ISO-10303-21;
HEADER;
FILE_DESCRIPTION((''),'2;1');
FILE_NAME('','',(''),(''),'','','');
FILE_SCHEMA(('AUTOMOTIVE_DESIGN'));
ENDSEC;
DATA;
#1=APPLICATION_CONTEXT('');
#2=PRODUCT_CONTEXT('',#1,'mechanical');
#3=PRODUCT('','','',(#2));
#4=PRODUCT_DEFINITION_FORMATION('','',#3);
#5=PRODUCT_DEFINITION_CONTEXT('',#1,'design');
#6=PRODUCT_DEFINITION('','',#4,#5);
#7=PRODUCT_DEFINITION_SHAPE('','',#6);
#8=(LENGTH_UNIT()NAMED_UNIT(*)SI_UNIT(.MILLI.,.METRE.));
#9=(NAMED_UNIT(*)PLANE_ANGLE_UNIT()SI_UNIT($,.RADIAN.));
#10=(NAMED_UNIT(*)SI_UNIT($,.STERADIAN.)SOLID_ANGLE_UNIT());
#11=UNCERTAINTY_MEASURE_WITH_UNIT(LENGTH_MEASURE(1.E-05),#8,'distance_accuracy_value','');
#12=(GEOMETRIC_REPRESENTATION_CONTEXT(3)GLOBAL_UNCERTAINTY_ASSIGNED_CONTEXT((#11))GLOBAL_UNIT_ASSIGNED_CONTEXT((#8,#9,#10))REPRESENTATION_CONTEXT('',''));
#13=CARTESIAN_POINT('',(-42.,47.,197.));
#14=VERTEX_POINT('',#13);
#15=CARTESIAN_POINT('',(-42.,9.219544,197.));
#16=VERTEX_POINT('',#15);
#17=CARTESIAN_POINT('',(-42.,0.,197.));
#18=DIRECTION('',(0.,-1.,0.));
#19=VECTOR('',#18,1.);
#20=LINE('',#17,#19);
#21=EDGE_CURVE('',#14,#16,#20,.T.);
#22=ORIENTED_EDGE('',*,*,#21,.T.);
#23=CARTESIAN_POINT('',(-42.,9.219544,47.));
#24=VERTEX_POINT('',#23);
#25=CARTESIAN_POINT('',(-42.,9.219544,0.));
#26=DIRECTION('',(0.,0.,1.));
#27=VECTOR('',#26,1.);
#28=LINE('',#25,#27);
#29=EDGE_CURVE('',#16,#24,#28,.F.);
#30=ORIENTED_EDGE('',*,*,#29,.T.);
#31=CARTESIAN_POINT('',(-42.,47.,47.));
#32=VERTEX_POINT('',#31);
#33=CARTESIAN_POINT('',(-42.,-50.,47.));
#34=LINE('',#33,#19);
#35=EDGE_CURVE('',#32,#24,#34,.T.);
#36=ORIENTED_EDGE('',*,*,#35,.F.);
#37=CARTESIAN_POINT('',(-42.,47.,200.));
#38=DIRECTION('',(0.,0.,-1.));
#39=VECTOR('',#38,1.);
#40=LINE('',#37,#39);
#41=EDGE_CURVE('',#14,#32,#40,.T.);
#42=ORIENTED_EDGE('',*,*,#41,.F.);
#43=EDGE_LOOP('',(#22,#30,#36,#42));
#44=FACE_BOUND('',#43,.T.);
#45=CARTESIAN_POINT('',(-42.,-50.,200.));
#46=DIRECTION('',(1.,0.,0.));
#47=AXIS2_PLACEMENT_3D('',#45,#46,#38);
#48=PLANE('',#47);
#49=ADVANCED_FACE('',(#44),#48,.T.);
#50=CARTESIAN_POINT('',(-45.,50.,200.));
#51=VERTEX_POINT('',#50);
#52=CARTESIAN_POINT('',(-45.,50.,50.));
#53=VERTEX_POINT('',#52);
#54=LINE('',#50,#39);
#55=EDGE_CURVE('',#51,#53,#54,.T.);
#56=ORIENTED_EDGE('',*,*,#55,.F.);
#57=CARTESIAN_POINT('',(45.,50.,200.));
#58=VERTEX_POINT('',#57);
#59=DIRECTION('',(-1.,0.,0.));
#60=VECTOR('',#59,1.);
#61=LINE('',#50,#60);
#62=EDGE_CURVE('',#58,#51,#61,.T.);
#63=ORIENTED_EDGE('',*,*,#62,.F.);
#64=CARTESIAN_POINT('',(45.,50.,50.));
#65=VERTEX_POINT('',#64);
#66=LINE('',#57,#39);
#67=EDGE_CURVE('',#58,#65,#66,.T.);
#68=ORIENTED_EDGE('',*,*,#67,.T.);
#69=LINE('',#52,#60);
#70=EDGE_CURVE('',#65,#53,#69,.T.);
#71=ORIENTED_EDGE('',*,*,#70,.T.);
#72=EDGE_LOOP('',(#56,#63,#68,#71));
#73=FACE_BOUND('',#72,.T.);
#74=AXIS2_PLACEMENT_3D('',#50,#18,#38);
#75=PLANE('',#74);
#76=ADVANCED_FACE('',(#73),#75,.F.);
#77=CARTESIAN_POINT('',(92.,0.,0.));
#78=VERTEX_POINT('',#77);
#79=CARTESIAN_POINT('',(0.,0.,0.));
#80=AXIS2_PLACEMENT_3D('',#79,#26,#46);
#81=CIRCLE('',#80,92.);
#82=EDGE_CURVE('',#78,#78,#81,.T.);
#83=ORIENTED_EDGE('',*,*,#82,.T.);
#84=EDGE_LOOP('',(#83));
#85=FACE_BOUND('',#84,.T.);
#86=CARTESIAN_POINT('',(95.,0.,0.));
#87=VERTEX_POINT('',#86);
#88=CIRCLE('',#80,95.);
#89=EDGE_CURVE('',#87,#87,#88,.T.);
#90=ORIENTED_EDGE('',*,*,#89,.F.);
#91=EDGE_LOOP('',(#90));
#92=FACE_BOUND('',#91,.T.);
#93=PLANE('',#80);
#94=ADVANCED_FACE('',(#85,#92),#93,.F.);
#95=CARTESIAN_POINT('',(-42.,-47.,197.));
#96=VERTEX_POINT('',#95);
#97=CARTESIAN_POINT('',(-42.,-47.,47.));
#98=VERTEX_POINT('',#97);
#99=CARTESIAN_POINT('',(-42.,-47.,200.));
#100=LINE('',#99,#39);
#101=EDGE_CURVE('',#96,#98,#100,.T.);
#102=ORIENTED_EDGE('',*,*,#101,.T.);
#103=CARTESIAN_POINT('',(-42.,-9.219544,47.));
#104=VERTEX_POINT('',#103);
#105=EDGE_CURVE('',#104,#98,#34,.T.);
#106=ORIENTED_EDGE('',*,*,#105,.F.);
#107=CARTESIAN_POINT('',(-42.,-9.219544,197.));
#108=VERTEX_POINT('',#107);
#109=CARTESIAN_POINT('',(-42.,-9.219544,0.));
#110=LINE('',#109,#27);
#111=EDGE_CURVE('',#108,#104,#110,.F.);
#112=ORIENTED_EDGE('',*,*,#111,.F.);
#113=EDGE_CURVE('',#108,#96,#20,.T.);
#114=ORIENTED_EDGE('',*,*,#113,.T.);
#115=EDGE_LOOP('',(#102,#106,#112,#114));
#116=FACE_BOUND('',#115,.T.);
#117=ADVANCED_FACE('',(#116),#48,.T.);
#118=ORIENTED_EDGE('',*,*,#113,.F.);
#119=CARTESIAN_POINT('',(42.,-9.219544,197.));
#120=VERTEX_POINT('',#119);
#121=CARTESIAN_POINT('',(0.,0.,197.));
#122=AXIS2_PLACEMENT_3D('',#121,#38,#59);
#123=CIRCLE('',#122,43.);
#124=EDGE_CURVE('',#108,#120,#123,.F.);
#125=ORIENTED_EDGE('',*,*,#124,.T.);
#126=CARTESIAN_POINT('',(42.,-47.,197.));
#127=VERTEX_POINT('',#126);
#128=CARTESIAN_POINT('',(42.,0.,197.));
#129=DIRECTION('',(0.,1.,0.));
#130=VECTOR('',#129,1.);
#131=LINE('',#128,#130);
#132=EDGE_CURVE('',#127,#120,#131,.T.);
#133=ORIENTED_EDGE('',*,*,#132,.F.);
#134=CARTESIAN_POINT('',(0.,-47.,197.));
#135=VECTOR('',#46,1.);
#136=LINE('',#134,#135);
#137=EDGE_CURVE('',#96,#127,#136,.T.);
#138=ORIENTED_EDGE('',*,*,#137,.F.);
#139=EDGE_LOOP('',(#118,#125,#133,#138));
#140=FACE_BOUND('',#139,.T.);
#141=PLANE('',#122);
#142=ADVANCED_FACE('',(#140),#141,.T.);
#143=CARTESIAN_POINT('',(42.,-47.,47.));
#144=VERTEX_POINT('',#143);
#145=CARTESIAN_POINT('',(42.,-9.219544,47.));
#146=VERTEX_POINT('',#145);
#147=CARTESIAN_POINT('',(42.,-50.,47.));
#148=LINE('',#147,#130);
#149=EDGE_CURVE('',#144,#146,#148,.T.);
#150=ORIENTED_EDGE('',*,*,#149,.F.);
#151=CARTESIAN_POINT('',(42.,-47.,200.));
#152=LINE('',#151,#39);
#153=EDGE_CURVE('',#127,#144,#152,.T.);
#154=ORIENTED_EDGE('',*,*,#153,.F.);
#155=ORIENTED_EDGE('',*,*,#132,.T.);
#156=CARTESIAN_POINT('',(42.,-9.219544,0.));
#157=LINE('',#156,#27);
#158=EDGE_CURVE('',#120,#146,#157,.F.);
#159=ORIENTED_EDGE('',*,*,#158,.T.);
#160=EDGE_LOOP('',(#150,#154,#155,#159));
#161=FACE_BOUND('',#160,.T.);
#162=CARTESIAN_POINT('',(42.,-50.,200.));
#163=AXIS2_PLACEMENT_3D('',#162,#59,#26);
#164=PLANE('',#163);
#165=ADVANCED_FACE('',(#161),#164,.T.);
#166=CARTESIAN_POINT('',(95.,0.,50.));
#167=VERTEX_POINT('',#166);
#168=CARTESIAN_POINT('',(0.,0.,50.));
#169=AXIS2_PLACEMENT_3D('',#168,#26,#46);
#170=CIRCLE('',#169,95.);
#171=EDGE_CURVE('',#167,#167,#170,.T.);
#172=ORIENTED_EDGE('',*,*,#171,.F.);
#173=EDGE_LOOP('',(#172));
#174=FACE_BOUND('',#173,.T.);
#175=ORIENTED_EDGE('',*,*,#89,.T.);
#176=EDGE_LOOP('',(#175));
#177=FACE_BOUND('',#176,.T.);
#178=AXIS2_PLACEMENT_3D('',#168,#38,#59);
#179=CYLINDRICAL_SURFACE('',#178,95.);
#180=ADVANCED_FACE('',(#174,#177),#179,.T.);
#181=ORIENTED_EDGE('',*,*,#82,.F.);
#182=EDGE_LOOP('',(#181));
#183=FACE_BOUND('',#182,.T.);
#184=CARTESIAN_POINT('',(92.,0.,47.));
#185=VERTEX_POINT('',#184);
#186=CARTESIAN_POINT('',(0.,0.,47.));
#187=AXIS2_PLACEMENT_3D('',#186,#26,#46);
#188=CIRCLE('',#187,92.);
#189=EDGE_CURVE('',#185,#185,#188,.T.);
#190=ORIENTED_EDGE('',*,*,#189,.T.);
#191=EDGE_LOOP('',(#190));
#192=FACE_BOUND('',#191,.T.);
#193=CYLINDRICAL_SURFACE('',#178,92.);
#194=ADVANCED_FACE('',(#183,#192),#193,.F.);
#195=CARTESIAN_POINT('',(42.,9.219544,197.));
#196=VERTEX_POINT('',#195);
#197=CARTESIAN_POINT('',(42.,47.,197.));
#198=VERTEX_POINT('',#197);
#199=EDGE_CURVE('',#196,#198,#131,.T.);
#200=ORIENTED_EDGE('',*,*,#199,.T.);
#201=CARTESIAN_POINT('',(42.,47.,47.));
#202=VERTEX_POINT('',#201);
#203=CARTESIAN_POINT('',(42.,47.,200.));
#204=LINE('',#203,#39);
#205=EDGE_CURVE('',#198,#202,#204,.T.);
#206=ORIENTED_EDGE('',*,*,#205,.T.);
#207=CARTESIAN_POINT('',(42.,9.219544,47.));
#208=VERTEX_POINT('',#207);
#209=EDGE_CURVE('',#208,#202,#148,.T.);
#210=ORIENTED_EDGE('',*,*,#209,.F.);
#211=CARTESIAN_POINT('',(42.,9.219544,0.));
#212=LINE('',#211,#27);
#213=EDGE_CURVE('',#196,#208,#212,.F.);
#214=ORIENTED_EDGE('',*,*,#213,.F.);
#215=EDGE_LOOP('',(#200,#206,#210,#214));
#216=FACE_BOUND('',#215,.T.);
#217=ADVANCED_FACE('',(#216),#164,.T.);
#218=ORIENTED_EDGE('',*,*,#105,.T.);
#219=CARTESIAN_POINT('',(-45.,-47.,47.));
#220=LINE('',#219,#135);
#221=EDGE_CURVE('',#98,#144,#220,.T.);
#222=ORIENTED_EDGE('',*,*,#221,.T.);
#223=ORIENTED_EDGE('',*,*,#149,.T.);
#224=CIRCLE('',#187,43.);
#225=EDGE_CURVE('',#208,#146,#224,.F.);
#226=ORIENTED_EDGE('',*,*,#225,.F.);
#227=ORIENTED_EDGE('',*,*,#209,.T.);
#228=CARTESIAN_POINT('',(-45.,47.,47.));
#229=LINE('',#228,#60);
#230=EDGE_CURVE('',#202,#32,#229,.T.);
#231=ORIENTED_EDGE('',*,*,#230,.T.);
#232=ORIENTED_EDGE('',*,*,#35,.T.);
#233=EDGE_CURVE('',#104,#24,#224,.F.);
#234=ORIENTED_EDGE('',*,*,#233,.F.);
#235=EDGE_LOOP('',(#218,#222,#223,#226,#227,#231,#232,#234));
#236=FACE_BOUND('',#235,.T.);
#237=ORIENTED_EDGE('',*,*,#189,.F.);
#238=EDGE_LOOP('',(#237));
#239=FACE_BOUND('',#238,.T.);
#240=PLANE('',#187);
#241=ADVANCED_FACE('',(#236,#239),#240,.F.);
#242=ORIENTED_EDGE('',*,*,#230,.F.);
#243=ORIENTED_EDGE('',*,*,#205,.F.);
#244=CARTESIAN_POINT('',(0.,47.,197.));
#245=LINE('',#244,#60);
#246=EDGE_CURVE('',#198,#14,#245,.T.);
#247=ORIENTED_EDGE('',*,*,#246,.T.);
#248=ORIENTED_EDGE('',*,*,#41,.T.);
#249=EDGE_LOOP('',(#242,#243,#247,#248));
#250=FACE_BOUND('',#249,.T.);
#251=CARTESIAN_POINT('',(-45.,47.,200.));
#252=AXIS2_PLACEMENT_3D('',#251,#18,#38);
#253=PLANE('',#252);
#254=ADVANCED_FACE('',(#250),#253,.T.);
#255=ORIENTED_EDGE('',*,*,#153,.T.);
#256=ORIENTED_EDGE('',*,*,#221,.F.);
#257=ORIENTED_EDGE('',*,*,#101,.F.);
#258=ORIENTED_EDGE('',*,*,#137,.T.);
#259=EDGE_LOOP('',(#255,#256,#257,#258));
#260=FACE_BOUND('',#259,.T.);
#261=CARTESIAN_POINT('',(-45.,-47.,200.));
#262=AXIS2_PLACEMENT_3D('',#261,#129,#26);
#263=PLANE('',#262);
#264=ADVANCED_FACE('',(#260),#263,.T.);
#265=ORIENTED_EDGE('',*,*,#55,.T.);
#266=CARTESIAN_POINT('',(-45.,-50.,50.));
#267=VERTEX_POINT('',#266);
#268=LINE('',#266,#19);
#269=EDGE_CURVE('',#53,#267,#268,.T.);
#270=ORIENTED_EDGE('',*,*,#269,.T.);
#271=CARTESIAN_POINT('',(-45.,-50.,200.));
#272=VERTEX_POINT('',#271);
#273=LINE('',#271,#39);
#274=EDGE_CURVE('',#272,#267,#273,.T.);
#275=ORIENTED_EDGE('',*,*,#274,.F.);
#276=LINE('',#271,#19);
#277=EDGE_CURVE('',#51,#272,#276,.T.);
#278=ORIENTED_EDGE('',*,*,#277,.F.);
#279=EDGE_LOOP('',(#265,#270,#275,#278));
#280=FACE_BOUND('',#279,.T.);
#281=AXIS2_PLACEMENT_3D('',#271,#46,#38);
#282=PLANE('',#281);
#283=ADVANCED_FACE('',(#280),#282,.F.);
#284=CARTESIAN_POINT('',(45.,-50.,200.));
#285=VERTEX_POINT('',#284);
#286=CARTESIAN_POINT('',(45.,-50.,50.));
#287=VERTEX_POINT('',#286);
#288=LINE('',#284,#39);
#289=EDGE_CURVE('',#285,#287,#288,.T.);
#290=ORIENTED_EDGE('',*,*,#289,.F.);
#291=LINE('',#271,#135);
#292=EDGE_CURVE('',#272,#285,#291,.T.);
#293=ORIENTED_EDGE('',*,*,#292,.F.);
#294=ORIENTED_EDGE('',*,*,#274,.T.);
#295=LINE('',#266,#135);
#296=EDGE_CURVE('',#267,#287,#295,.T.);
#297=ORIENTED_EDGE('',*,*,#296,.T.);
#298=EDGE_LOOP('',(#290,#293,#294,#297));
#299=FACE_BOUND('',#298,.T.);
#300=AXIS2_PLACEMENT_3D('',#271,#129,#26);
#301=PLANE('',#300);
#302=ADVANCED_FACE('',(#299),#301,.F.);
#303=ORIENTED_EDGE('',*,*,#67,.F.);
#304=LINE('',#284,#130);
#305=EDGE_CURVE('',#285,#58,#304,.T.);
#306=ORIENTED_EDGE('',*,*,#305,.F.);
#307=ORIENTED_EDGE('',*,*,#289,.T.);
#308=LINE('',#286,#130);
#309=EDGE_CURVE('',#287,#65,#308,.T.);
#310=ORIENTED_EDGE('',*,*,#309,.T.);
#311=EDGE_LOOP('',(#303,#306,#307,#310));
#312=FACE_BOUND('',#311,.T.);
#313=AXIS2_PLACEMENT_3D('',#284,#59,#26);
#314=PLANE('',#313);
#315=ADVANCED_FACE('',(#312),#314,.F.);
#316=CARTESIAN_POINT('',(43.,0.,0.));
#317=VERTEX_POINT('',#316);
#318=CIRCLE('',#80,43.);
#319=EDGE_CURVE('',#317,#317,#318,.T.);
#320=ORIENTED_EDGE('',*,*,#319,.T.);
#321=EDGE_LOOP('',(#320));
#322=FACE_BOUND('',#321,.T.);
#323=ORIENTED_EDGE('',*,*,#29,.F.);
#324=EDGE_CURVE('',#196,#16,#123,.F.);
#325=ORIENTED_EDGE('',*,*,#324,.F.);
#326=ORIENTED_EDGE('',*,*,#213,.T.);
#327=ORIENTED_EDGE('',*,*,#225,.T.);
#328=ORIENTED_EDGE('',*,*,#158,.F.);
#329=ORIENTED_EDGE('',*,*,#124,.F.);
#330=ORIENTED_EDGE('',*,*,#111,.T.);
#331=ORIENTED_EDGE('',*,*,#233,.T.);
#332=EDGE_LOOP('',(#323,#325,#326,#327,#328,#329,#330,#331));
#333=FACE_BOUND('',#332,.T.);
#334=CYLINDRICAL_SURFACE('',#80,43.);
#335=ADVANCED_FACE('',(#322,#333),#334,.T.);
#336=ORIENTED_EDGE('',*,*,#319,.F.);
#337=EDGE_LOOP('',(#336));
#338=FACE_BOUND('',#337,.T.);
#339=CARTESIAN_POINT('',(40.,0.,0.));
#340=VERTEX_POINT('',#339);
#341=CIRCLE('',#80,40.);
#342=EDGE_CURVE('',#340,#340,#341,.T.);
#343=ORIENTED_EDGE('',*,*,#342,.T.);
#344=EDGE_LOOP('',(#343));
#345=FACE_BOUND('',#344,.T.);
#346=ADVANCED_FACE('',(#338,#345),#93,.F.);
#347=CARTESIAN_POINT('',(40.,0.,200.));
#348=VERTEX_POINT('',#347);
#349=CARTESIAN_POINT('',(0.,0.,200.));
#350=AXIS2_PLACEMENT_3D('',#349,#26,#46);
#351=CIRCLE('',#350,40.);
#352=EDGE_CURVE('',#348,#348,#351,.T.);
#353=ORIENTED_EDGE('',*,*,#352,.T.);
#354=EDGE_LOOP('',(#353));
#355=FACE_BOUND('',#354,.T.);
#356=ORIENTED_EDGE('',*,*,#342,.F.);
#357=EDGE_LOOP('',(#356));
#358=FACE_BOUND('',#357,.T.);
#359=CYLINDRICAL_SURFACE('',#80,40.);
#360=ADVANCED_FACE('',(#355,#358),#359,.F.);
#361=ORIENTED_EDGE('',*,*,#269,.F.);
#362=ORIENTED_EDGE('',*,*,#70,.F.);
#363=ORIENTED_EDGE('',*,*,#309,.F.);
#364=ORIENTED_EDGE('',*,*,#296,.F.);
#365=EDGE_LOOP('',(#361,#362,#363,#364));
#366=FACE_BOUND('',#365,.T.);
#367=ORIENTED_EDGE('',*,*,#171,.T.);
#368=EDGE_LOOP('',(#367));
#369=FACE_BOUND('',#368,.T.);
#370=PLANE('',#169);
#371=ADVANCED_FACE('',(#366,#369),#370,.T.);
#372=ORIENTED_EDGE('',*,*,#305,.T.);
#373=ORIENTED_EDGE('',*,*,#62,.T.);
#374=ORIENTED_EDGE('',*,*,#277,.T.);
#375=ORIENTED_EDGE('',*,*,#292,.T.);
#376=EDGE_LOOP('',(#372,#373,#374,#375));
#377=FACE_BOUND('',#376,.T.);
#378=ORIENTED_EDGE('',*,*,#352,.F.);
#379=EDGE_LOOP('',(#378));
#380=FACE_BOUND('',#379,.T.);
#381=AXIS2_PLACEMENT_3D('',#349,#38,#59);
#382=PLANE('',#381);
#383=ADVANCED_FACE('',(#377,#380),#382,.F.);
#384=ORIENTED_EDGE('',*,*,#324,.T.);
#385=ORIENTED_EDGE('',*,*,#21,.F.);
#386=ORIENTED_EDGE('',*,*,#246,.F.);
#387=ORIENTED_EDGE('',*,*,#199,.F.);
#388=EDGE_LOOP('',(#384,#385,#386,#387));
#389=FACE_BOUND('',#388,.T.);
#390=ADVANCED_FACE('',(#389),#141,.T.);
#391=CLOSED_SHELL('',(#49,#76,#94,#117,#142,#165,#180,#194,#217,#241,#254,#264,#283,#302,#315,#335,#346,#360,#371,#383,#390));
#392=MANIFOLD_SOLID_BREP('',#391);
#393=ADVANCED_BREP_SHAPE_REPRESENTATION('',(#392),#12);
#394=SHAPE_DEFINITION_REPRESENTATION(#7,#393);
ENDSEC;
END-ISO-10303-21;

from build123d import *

# Parameters (mm, degrees)
SKETCH_1_R          = 95
EXTRUDE_1_DEPTH     = 50
SKETCH_2_W          = 90
SKETCH_2_H          = 100
EXTRUDE_2_DEPTH     = 150
SKETCH_3_R          = 40
CUT_EXTRUDE_1_DEPTH = 241.935676063
SHELL_1_OUTLINE_R   = 92
SHELL_1_OUTLINE_R_2 = 43
SHELL_1_DEPTH       = 47
SHELL_START         = 47
SHELL_1_2_DEPTH     = 150


# Read off the part's stored shape, not the designer's step: Оболочка1
with BuildPart() as part:
    # Эскиз1 → Бобышка-Вытянуть1 (new body)
    with BuildSketch(Plane.XY):
        Circle(SKETCH_1_R)
    extrude(amount=EXTRUDE_1_DEPTH)

    # Эскиз2 → Бобышка-Вытянуть2 (add)
    with BuildSketch(Plane.XY.offset(50)):
        Rectangle(SKETCH_2_W, SKETCH_2_H)
    extrude(amount=EXTRUDE_2_DEPTH)

    # Эскиз3 → Вырез-Вытянуть1 (cut, through all)
    with BuildSketch(Plane.XY.offset(200)):
        Circle(SKETCH_3_R)
    extrude(amount=-CUT_EXTRUDE_1_DEPTH, mode=Mode.SUBTRACT)

    # Оболочка1 outline → Оболочка1 (cut)
    with BuildSketch(Plane.XY):
        Circle(SHELL_1_OUTLINE_R)
        Circle(SHELL_1_OUTLINE_R_2, mode=Mode.SUBTRACT)
    extrude(amount=SHELL_1_DEPTH, mode=Mode.SUBTRACT)

    # Shell 1 2 outline → Shell 1 2 (cut)
    with BuildSketch(Plane.XY.offset(SHELL_START)):
        with BuildLine():
            ThreePointArc((-42, 9.219544457), (0, 43), (42, 9.219544457))
            Line((42, 9.219544457), (42, 47))
            Line((42, 47), (-42, 47))
            Line((-42, 47), (-42, 9.219544457))
        make_face()
        with BuildLine():
            Line((42, -47), (42, -9.219544457))
            ThreePointArc((42, -9.219544457), (0, -43), (-42, -9.219544457))
            Line((-42, -9.219544457), (-42, -47))
            Line((-42, -47), (42, -47))
        make_face()
    extrude(amount=SHELL_1_2_DEPTH, mode=Mode.SUBTRACT)


solid = part.part
